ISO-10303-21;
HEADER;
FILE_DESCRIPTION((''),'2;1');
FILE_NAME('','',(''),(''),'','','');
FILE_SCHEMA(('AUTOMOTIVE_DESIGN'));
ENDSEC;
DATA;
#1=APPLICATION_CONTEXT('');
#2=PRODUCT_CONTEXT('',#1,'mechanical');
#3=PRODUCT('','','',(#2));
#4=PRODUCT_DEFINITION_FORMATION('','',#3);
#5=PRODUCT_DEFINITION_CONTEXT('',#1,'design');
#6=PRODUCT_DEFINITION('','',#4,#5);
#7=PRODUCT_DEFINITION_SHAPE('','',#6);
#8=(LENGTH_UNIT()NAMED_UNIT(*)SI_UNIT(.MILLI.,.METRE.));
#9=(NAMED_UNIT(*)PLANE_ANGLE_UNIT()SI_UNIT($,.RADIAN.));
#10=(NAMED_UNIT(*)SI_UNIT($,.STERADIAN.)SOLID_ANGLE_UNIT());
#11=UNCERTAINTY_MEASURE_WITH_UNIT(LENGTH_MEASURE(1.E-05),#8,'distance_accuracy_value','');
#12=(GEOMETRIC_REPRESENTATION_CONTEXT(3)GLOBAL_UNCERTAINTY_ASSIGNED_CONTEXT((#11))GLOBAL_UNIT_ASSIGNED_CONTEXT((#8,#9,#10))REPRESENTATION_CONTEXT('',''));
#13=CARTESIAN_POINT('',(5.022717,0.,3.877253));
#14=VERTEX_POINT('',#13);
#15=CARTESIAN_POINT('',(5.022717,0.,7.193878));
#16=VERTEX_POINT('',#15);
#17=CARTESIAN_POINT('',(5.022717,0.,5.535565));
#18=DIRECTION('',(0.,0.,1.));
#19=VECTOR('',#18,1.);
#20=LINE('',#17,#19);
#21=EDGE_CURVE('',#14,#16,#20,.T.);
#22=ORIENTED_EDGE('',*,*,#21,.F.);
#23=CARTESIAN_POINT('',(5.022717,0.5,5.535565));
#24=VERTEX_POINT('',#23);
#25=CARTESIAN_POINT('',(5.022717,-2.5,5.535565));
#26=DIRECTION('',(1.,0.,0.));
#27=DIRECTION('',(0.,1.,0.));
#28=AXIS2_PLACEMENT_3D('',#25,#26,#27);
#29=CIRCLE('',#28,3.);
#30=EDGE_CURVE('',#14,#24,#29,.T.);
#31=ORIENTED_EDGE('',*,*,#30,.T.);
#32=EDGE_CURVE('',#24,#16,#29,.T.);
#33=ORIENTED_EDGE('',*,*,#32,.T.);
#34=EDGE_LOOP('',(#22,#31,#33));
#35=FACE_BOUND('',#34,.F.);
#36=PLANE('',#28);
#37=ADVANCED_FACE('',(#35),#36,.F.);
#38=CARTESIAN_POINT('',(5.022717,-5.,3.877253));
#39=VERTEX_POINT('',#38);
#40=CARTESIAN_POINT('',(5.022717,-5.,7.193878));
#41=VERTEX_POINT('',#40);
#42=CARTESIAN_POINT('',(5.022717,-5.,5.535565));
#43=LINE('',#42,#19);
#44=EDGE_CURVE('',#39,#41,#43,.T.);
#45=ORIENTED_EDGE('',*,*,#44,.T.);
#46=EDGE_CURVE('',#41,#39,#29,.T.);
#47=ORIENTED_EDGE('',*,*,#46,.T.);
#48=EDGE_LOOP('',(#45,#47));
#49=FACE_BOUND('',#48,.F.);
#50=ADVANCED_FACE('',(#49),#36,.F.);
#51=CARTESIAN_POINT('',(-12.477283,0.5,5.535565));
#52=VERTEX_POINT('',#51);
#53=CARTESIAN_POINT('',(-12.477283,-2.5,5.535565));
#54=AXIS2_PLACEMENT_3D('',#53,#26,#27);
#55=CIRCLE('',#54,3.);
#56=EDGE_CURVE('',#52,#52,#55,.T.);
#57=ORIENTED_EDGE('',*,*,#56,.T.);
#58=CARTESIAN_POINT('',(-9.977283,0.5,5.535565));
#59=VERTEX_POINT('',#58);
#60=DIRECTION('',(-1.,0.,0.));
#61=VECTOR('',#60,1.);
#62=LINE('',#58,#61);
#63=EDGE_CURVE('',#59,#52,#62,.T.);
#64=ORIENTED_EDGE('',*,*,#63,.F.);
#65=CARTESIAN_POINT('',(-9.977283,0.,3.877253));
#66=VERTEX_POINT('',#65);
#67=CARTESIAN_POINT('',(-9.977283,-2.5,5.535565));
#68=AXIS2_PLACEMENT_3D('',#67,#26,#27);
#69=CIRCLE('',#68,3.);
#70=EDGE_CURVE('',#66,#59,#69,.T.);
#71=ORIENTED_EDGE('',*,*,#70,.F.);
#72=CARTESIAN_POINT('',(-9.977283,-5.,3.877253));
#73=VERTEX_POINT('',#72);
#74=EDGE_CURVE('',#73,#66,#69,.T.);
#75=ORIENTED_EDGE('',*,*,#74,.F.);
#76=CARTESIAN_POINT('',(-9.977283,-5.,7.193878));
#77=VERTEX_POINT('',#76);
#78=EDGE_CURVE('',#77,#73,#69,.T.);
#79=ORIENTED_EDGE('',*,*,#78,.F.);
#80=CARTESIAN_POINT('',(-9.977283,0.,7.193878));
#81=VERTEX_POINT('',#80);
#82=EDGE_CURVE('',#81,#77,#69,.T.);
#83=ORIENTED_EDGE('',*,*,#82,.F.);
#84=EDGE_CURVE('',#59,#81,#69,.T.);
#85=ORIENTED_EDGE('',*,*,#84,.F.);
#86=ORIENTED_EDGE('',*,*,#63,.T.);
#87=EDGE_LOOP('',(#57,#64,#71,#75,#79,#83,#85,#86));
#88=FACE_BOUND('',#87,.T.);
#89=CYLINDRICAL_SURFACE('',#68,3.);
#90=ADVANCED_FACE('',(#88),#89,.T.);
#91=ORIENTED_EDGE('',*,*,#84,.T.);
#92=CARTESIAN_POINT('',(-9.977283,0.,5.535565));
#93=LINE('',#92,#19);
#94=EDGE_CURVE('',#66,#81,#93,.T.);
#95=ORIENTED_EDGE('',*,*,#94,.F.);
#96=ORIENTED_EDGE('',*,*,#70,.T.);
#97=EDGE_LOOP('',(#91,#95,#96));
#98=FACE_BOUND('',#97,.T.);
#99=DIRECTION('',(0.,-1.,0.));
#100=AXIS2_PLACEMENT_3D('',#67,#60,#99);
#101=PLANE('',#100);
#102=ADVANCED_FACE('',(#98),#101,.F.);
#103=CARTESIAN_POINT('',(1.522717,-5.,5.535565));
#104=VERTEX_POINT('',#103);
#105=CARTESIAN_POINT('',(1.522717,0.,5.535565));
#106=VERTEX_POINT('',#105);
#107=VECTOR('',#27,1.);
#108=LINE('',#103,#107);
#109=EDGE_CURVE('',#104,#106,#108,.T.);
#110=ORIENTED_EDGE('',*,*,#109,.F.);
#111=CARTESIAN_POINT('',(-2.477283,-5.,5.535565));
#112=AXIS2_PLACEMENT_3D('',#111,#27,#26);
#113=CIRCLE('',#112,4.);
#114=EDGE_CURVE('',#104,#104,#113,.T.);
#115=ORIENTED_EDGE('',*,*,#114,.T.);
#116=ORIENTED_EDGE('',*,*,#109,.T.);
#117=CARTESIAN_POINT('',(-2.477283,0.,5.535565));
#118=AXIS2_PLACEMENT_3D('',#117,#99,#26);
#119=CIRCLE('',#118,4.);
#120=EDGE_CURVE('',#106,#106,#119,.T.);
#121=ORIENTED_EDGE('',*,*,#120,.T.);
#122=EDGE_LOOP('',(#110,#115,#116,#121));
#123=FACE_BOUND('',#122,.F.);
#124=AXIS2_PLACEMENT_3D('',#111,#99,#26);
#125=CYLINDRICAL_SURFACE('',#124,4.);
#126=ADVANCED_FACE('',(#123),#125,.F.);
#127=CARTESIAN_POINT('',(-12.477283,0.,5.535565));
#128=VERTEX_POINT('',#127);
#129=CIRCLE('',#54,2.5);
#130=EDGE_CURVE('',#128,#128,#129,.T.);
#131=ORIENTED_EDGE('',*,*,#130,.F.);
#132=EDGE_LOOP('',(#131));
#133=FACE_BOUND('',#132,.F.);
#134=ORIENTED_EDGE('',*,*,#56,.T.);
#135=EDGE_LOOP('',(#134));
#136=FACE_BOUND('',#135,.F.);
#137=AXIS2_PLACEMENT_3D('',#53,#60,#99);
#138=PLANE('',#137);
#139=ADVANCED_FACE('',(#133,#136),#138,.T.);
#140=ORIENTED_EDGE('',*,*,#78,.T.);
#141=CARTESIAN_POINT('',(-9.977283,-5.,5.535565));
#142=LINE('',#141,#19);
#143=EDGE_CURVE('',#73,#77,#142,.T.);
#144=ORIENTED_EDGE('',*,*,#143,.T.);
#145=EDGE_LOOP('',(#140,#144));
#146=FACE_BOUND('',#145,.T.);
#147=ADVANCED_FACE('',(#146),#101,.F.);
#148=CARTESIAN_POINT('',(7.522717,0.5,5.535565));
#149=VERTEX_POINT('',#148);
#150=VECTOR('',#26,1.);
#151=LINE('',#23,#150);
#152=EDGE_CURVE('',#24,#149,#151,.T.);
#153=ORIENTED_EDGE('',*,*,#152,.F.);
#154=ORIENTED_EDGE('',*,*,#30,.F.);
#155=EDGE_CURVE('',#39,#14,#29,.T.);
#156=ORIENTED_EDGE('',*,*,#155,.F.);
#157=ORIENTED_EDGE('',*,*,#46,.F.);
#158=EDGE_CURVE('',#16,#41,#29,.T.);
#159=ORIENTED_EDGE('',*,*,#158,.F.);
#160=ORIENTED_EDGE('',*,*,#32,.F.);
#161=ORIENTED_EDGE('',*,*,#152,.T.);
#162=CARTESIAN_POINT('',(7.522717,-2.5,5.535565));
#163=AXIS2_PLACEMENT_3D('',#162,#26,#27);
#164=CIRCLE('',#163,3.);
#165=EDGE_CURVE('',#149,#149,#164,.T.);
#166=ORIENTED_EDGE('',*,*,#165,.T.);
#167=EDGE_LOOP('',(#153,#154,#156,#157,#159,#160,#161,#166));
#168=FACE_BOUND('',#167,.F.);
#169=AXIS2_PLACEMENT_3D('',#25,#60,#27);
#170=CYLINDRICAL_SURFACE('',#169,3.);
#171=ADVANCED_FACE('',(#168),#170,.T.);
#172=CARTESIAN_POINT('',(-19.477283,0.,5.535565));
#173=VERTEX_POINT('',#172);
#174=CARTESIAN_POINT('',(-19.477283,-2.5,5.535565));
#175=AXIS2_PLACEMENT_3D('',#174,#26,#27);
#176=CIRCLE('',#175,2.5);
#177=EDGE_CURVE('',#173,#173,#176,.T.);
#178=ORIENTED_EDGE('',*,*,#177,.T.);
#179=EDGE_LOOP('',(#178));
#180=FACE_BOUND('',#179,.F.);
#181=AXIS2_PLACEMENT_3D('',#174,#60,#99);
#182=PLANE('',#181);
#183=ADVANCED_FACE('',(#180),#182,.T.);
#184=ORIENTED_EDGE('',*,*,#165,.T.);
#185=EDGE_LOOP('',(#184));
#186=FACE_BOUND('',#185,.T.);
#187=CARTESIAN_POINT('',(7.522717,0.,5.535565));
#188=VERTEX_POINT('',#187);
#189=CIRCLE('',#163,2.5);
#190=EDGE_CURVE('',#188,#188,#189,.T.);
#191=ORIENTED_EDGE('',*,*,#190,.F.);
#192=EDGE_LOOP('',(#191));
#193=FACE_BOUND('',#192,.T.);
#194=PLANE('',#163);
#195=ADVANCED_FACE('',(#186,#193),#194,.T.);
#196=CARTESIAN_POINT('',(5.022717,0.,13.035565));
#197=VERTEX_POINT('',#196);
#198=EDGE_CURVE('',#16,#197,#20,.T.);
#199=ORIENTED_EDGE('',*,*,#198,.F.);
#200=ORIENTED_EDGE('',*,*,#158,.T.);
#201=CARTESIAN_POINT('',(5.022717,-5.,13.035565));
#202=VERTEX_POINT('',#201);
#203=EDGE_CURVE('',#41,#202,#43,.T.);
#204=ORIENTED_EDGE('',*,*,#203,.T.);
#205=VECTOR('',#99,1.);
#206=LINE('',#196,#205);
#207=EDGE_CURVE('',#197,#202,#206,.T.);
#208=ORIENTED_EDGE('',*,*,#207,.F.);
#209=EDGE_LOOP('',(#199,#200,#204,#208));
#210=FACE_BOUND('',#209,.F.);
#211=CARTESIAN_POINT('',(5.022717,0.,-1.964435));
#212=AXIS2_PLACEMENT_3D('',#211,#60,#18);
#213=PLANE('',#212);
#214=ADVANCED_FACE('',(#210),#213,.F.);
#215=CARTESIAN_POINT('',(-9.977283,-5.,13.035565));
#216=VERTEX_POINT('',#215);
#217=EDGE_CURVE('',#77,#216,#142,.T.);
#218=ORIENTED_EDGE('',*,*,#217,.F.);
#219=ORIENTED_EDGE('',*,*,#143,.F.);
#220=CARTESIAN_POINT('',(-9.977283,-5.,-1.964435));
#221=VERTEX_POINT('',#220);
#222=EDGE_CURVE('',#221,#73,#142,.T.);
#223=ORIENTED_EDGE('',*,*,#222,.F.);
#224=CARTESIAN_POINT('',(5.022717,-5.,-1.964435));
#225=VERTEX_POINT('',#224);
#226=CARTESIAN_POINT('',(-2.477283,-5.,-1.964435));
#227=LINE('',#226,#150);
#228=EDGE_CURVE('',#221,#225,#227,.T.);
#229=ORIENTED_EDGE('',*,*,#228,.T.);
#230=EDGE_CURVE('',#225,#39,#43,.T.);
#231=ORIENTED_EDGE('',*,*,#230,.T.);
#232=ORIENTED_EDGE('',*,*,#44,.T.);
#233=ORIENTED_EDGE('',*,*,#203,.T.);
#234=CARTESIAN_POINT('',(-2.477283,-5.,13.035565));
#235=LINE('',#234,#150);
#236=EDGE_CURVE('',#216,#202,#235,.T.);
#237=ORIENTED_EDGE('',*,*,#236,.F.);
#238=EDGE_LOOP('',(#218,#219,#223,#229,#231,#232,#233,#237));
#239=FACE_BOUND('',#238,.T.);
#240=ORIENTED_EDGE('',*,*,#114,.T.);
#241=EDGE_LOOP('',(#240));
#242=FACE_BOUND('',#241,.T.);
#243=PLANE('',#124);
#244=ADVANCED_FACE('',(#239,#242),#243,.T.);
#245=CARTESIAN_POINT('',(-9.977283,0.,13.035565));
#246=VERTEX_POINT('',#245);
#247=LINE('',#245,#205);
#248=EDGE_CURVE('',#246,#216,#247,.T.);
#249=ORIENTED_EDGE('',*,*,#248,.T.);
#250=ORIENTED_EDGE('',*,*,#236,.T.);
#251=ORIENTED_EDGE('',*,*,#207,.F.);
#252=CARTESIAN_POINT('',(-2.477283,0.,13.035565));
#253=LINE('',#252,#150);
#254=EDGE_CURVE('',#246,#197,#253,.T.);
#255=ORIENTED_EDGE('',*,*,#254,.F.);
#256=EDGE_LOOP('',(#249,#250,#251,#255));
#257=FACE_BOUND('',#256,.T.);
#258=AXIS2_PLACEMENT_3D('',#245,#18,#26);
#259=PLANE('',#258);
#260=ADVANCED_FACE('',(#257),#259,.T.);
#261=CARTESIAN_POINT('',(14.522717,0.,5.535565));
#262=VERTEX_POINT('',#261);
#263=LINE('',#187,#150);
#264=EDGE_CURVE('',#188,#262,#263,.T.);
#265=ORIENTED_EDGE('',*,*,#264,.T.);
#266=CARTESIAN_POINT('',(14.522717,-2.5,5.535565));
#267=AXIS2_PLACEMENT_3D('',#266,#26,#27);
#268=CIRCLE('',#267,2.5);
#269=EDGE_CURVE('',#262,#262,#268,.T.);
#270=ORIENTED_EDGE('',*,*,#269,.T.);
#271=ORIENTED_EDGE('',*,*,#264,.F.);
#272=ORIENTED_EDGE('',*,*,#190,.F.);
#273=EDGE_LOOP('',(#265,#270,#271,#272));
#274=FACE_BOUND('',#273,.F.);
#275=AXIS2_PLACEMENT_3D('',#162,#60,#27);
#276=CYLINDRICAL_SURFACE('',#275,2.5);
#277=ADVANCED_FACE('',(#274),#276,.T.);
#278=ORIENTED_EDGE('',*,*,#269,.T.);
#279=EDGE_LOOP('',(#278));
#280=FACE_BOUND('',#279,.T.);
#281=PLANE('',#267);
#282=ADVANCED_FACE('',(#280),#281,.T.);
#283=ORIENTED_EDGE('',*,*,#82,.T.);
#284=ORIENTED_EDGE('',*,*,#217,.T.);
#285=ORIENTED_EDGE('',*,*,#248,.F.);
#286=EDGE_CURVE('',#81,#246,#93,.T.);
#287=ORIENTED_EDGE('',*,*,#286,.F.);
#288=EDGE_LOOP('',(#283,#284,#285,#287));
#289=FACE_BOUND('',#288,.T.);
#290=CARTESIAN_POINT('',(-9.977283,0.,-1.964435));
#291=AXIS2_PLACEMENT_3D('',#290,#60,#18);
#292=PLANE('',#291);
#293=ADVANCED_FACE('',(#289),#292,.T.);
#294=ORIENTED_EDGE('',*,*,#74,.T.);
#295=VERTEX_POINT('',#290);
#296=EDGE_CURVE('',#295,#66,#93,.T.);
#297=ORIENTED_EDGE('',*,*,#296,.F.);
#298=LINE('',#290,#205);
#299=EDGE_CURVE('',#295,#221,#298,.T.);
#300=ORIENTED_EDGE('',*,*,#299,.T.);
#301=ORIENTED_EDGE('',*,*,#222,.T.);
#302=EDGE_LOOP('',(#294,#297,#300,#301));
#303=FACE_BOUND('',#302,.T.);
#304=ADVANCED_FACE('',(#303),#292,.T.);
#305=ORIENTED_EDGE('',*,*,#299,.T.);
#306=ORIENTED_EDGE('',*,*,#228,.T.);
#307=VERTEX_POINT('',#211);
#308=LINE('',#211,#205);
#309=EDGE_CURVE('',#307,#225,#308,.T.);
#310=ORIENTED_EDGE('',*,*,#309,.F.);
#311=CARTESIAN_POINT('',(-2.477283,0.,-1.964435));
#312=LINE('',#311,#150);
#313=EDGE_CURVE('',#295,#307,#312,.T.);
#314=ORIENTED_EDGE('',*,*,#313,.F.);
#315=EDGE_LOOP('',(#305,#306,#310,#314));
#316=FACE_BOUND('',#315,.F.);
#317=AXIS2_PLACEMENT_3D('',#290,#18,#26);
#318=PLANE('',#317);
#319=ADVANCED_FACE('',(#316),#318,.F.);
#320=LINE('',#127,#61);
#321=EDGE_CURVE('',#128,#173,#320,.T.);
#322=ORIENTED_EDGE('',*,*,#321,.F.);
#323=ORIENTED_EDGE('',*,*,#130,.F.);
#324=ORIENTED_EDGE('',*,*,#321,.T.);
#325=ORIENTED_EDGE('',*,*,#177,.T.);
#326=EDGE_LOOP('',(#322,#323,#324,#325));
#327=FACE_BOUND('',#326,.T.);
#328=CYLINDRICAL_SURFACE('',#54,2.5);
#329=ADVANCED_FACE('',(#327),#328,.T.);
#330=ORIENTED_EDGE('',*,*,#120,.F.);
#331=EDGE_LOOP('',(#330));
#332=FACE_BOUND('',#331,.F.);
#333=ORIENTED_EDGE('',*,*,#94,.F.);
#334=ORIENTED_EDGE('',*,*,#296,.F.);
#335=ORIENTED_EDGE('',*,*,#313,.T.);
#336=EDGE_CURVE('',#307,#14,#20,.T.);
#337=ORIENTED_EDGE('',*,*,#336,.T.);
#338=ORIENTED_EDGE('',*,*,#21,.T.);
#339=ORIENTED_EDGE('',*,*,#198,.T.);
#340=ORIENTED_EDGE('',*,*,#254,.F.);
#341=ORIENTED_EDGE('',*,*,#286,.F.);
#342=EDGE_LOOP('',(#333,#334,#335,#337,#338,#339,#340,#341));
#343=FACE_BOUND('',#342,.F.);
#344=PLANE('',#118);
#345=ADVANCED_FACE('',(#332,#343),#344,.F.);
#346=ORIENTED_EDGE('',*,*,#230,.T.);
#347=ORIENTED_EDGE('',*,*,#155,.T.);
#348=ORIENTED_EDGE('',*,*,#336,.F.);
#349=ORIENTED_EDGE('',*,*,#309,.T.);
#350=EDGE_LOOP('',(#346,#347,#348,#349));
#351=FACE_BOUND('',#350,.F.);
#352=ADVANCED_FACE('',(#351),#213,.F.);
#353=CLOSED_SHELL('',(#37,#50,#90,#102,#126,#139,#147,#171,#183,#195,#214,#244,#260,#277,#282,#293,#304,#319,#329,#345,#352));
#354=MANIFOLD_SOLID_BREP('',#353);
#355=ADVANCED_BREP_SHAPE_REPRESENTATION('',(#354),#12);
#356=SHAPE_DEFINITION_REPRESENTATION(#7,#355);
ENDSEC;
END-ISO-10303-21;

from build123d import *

# Parameters (mm, degrees)
F0_W      = 15
F0_H      = 15
F1_DEPTH  = 5
F2_R      = 4
F3_DEPTH  = 25
F4_R      = 3
F5_DEPTH  = 2.5
F10_R     = 2.5
F11_DEPTH = 7


with BuildPart() as f1:
    # F0 (on Front) → F1 (new body)
    with BuildSketch(Plane.XZ):
        with Locations((-2.477283068, 5.5355651764)):
            Rectangle(F0_W, F0_H)
    extrude(amount=F1_DEPTH)

    # F2 (on face) → F3 (cut)
    with BuildSketch(Plane.XZ.offset(5)):
        with Locations((-2.477283068, 5.5355651764)):
            Circle(F2_R)
    extrude(amount=-F3_DEPTH, mode=Mode.SUBTRACT)

    # F4 (on face) → F5 (join)
    with BuildSketch(Plane.YZ.offset(5.022716932)):
        with Locations((-2.5, 5.5355651764)):
            Circle(F4_R)
    extrude(amount=F5_DEPTH)

    # F10 (on face) → F11 (join)
    with BuildSketch(Plane.YZ.offset(7.522716932)):
        with Locations((-2.5, 5.5355651764)):
            Circle(F10_R)
    extrude(amount=F11_DEPTH)

    # F12: F1 across plane


with BuildPart() as f1_1:
    add(f1.part)
    add(f1.part.mirror(Plane(origin=(-2.477283068, 0, 13.0355651764), x_dir=(0, -1, 0), z_dir=(-1, 0, 0))))


solid = f1_1.part
